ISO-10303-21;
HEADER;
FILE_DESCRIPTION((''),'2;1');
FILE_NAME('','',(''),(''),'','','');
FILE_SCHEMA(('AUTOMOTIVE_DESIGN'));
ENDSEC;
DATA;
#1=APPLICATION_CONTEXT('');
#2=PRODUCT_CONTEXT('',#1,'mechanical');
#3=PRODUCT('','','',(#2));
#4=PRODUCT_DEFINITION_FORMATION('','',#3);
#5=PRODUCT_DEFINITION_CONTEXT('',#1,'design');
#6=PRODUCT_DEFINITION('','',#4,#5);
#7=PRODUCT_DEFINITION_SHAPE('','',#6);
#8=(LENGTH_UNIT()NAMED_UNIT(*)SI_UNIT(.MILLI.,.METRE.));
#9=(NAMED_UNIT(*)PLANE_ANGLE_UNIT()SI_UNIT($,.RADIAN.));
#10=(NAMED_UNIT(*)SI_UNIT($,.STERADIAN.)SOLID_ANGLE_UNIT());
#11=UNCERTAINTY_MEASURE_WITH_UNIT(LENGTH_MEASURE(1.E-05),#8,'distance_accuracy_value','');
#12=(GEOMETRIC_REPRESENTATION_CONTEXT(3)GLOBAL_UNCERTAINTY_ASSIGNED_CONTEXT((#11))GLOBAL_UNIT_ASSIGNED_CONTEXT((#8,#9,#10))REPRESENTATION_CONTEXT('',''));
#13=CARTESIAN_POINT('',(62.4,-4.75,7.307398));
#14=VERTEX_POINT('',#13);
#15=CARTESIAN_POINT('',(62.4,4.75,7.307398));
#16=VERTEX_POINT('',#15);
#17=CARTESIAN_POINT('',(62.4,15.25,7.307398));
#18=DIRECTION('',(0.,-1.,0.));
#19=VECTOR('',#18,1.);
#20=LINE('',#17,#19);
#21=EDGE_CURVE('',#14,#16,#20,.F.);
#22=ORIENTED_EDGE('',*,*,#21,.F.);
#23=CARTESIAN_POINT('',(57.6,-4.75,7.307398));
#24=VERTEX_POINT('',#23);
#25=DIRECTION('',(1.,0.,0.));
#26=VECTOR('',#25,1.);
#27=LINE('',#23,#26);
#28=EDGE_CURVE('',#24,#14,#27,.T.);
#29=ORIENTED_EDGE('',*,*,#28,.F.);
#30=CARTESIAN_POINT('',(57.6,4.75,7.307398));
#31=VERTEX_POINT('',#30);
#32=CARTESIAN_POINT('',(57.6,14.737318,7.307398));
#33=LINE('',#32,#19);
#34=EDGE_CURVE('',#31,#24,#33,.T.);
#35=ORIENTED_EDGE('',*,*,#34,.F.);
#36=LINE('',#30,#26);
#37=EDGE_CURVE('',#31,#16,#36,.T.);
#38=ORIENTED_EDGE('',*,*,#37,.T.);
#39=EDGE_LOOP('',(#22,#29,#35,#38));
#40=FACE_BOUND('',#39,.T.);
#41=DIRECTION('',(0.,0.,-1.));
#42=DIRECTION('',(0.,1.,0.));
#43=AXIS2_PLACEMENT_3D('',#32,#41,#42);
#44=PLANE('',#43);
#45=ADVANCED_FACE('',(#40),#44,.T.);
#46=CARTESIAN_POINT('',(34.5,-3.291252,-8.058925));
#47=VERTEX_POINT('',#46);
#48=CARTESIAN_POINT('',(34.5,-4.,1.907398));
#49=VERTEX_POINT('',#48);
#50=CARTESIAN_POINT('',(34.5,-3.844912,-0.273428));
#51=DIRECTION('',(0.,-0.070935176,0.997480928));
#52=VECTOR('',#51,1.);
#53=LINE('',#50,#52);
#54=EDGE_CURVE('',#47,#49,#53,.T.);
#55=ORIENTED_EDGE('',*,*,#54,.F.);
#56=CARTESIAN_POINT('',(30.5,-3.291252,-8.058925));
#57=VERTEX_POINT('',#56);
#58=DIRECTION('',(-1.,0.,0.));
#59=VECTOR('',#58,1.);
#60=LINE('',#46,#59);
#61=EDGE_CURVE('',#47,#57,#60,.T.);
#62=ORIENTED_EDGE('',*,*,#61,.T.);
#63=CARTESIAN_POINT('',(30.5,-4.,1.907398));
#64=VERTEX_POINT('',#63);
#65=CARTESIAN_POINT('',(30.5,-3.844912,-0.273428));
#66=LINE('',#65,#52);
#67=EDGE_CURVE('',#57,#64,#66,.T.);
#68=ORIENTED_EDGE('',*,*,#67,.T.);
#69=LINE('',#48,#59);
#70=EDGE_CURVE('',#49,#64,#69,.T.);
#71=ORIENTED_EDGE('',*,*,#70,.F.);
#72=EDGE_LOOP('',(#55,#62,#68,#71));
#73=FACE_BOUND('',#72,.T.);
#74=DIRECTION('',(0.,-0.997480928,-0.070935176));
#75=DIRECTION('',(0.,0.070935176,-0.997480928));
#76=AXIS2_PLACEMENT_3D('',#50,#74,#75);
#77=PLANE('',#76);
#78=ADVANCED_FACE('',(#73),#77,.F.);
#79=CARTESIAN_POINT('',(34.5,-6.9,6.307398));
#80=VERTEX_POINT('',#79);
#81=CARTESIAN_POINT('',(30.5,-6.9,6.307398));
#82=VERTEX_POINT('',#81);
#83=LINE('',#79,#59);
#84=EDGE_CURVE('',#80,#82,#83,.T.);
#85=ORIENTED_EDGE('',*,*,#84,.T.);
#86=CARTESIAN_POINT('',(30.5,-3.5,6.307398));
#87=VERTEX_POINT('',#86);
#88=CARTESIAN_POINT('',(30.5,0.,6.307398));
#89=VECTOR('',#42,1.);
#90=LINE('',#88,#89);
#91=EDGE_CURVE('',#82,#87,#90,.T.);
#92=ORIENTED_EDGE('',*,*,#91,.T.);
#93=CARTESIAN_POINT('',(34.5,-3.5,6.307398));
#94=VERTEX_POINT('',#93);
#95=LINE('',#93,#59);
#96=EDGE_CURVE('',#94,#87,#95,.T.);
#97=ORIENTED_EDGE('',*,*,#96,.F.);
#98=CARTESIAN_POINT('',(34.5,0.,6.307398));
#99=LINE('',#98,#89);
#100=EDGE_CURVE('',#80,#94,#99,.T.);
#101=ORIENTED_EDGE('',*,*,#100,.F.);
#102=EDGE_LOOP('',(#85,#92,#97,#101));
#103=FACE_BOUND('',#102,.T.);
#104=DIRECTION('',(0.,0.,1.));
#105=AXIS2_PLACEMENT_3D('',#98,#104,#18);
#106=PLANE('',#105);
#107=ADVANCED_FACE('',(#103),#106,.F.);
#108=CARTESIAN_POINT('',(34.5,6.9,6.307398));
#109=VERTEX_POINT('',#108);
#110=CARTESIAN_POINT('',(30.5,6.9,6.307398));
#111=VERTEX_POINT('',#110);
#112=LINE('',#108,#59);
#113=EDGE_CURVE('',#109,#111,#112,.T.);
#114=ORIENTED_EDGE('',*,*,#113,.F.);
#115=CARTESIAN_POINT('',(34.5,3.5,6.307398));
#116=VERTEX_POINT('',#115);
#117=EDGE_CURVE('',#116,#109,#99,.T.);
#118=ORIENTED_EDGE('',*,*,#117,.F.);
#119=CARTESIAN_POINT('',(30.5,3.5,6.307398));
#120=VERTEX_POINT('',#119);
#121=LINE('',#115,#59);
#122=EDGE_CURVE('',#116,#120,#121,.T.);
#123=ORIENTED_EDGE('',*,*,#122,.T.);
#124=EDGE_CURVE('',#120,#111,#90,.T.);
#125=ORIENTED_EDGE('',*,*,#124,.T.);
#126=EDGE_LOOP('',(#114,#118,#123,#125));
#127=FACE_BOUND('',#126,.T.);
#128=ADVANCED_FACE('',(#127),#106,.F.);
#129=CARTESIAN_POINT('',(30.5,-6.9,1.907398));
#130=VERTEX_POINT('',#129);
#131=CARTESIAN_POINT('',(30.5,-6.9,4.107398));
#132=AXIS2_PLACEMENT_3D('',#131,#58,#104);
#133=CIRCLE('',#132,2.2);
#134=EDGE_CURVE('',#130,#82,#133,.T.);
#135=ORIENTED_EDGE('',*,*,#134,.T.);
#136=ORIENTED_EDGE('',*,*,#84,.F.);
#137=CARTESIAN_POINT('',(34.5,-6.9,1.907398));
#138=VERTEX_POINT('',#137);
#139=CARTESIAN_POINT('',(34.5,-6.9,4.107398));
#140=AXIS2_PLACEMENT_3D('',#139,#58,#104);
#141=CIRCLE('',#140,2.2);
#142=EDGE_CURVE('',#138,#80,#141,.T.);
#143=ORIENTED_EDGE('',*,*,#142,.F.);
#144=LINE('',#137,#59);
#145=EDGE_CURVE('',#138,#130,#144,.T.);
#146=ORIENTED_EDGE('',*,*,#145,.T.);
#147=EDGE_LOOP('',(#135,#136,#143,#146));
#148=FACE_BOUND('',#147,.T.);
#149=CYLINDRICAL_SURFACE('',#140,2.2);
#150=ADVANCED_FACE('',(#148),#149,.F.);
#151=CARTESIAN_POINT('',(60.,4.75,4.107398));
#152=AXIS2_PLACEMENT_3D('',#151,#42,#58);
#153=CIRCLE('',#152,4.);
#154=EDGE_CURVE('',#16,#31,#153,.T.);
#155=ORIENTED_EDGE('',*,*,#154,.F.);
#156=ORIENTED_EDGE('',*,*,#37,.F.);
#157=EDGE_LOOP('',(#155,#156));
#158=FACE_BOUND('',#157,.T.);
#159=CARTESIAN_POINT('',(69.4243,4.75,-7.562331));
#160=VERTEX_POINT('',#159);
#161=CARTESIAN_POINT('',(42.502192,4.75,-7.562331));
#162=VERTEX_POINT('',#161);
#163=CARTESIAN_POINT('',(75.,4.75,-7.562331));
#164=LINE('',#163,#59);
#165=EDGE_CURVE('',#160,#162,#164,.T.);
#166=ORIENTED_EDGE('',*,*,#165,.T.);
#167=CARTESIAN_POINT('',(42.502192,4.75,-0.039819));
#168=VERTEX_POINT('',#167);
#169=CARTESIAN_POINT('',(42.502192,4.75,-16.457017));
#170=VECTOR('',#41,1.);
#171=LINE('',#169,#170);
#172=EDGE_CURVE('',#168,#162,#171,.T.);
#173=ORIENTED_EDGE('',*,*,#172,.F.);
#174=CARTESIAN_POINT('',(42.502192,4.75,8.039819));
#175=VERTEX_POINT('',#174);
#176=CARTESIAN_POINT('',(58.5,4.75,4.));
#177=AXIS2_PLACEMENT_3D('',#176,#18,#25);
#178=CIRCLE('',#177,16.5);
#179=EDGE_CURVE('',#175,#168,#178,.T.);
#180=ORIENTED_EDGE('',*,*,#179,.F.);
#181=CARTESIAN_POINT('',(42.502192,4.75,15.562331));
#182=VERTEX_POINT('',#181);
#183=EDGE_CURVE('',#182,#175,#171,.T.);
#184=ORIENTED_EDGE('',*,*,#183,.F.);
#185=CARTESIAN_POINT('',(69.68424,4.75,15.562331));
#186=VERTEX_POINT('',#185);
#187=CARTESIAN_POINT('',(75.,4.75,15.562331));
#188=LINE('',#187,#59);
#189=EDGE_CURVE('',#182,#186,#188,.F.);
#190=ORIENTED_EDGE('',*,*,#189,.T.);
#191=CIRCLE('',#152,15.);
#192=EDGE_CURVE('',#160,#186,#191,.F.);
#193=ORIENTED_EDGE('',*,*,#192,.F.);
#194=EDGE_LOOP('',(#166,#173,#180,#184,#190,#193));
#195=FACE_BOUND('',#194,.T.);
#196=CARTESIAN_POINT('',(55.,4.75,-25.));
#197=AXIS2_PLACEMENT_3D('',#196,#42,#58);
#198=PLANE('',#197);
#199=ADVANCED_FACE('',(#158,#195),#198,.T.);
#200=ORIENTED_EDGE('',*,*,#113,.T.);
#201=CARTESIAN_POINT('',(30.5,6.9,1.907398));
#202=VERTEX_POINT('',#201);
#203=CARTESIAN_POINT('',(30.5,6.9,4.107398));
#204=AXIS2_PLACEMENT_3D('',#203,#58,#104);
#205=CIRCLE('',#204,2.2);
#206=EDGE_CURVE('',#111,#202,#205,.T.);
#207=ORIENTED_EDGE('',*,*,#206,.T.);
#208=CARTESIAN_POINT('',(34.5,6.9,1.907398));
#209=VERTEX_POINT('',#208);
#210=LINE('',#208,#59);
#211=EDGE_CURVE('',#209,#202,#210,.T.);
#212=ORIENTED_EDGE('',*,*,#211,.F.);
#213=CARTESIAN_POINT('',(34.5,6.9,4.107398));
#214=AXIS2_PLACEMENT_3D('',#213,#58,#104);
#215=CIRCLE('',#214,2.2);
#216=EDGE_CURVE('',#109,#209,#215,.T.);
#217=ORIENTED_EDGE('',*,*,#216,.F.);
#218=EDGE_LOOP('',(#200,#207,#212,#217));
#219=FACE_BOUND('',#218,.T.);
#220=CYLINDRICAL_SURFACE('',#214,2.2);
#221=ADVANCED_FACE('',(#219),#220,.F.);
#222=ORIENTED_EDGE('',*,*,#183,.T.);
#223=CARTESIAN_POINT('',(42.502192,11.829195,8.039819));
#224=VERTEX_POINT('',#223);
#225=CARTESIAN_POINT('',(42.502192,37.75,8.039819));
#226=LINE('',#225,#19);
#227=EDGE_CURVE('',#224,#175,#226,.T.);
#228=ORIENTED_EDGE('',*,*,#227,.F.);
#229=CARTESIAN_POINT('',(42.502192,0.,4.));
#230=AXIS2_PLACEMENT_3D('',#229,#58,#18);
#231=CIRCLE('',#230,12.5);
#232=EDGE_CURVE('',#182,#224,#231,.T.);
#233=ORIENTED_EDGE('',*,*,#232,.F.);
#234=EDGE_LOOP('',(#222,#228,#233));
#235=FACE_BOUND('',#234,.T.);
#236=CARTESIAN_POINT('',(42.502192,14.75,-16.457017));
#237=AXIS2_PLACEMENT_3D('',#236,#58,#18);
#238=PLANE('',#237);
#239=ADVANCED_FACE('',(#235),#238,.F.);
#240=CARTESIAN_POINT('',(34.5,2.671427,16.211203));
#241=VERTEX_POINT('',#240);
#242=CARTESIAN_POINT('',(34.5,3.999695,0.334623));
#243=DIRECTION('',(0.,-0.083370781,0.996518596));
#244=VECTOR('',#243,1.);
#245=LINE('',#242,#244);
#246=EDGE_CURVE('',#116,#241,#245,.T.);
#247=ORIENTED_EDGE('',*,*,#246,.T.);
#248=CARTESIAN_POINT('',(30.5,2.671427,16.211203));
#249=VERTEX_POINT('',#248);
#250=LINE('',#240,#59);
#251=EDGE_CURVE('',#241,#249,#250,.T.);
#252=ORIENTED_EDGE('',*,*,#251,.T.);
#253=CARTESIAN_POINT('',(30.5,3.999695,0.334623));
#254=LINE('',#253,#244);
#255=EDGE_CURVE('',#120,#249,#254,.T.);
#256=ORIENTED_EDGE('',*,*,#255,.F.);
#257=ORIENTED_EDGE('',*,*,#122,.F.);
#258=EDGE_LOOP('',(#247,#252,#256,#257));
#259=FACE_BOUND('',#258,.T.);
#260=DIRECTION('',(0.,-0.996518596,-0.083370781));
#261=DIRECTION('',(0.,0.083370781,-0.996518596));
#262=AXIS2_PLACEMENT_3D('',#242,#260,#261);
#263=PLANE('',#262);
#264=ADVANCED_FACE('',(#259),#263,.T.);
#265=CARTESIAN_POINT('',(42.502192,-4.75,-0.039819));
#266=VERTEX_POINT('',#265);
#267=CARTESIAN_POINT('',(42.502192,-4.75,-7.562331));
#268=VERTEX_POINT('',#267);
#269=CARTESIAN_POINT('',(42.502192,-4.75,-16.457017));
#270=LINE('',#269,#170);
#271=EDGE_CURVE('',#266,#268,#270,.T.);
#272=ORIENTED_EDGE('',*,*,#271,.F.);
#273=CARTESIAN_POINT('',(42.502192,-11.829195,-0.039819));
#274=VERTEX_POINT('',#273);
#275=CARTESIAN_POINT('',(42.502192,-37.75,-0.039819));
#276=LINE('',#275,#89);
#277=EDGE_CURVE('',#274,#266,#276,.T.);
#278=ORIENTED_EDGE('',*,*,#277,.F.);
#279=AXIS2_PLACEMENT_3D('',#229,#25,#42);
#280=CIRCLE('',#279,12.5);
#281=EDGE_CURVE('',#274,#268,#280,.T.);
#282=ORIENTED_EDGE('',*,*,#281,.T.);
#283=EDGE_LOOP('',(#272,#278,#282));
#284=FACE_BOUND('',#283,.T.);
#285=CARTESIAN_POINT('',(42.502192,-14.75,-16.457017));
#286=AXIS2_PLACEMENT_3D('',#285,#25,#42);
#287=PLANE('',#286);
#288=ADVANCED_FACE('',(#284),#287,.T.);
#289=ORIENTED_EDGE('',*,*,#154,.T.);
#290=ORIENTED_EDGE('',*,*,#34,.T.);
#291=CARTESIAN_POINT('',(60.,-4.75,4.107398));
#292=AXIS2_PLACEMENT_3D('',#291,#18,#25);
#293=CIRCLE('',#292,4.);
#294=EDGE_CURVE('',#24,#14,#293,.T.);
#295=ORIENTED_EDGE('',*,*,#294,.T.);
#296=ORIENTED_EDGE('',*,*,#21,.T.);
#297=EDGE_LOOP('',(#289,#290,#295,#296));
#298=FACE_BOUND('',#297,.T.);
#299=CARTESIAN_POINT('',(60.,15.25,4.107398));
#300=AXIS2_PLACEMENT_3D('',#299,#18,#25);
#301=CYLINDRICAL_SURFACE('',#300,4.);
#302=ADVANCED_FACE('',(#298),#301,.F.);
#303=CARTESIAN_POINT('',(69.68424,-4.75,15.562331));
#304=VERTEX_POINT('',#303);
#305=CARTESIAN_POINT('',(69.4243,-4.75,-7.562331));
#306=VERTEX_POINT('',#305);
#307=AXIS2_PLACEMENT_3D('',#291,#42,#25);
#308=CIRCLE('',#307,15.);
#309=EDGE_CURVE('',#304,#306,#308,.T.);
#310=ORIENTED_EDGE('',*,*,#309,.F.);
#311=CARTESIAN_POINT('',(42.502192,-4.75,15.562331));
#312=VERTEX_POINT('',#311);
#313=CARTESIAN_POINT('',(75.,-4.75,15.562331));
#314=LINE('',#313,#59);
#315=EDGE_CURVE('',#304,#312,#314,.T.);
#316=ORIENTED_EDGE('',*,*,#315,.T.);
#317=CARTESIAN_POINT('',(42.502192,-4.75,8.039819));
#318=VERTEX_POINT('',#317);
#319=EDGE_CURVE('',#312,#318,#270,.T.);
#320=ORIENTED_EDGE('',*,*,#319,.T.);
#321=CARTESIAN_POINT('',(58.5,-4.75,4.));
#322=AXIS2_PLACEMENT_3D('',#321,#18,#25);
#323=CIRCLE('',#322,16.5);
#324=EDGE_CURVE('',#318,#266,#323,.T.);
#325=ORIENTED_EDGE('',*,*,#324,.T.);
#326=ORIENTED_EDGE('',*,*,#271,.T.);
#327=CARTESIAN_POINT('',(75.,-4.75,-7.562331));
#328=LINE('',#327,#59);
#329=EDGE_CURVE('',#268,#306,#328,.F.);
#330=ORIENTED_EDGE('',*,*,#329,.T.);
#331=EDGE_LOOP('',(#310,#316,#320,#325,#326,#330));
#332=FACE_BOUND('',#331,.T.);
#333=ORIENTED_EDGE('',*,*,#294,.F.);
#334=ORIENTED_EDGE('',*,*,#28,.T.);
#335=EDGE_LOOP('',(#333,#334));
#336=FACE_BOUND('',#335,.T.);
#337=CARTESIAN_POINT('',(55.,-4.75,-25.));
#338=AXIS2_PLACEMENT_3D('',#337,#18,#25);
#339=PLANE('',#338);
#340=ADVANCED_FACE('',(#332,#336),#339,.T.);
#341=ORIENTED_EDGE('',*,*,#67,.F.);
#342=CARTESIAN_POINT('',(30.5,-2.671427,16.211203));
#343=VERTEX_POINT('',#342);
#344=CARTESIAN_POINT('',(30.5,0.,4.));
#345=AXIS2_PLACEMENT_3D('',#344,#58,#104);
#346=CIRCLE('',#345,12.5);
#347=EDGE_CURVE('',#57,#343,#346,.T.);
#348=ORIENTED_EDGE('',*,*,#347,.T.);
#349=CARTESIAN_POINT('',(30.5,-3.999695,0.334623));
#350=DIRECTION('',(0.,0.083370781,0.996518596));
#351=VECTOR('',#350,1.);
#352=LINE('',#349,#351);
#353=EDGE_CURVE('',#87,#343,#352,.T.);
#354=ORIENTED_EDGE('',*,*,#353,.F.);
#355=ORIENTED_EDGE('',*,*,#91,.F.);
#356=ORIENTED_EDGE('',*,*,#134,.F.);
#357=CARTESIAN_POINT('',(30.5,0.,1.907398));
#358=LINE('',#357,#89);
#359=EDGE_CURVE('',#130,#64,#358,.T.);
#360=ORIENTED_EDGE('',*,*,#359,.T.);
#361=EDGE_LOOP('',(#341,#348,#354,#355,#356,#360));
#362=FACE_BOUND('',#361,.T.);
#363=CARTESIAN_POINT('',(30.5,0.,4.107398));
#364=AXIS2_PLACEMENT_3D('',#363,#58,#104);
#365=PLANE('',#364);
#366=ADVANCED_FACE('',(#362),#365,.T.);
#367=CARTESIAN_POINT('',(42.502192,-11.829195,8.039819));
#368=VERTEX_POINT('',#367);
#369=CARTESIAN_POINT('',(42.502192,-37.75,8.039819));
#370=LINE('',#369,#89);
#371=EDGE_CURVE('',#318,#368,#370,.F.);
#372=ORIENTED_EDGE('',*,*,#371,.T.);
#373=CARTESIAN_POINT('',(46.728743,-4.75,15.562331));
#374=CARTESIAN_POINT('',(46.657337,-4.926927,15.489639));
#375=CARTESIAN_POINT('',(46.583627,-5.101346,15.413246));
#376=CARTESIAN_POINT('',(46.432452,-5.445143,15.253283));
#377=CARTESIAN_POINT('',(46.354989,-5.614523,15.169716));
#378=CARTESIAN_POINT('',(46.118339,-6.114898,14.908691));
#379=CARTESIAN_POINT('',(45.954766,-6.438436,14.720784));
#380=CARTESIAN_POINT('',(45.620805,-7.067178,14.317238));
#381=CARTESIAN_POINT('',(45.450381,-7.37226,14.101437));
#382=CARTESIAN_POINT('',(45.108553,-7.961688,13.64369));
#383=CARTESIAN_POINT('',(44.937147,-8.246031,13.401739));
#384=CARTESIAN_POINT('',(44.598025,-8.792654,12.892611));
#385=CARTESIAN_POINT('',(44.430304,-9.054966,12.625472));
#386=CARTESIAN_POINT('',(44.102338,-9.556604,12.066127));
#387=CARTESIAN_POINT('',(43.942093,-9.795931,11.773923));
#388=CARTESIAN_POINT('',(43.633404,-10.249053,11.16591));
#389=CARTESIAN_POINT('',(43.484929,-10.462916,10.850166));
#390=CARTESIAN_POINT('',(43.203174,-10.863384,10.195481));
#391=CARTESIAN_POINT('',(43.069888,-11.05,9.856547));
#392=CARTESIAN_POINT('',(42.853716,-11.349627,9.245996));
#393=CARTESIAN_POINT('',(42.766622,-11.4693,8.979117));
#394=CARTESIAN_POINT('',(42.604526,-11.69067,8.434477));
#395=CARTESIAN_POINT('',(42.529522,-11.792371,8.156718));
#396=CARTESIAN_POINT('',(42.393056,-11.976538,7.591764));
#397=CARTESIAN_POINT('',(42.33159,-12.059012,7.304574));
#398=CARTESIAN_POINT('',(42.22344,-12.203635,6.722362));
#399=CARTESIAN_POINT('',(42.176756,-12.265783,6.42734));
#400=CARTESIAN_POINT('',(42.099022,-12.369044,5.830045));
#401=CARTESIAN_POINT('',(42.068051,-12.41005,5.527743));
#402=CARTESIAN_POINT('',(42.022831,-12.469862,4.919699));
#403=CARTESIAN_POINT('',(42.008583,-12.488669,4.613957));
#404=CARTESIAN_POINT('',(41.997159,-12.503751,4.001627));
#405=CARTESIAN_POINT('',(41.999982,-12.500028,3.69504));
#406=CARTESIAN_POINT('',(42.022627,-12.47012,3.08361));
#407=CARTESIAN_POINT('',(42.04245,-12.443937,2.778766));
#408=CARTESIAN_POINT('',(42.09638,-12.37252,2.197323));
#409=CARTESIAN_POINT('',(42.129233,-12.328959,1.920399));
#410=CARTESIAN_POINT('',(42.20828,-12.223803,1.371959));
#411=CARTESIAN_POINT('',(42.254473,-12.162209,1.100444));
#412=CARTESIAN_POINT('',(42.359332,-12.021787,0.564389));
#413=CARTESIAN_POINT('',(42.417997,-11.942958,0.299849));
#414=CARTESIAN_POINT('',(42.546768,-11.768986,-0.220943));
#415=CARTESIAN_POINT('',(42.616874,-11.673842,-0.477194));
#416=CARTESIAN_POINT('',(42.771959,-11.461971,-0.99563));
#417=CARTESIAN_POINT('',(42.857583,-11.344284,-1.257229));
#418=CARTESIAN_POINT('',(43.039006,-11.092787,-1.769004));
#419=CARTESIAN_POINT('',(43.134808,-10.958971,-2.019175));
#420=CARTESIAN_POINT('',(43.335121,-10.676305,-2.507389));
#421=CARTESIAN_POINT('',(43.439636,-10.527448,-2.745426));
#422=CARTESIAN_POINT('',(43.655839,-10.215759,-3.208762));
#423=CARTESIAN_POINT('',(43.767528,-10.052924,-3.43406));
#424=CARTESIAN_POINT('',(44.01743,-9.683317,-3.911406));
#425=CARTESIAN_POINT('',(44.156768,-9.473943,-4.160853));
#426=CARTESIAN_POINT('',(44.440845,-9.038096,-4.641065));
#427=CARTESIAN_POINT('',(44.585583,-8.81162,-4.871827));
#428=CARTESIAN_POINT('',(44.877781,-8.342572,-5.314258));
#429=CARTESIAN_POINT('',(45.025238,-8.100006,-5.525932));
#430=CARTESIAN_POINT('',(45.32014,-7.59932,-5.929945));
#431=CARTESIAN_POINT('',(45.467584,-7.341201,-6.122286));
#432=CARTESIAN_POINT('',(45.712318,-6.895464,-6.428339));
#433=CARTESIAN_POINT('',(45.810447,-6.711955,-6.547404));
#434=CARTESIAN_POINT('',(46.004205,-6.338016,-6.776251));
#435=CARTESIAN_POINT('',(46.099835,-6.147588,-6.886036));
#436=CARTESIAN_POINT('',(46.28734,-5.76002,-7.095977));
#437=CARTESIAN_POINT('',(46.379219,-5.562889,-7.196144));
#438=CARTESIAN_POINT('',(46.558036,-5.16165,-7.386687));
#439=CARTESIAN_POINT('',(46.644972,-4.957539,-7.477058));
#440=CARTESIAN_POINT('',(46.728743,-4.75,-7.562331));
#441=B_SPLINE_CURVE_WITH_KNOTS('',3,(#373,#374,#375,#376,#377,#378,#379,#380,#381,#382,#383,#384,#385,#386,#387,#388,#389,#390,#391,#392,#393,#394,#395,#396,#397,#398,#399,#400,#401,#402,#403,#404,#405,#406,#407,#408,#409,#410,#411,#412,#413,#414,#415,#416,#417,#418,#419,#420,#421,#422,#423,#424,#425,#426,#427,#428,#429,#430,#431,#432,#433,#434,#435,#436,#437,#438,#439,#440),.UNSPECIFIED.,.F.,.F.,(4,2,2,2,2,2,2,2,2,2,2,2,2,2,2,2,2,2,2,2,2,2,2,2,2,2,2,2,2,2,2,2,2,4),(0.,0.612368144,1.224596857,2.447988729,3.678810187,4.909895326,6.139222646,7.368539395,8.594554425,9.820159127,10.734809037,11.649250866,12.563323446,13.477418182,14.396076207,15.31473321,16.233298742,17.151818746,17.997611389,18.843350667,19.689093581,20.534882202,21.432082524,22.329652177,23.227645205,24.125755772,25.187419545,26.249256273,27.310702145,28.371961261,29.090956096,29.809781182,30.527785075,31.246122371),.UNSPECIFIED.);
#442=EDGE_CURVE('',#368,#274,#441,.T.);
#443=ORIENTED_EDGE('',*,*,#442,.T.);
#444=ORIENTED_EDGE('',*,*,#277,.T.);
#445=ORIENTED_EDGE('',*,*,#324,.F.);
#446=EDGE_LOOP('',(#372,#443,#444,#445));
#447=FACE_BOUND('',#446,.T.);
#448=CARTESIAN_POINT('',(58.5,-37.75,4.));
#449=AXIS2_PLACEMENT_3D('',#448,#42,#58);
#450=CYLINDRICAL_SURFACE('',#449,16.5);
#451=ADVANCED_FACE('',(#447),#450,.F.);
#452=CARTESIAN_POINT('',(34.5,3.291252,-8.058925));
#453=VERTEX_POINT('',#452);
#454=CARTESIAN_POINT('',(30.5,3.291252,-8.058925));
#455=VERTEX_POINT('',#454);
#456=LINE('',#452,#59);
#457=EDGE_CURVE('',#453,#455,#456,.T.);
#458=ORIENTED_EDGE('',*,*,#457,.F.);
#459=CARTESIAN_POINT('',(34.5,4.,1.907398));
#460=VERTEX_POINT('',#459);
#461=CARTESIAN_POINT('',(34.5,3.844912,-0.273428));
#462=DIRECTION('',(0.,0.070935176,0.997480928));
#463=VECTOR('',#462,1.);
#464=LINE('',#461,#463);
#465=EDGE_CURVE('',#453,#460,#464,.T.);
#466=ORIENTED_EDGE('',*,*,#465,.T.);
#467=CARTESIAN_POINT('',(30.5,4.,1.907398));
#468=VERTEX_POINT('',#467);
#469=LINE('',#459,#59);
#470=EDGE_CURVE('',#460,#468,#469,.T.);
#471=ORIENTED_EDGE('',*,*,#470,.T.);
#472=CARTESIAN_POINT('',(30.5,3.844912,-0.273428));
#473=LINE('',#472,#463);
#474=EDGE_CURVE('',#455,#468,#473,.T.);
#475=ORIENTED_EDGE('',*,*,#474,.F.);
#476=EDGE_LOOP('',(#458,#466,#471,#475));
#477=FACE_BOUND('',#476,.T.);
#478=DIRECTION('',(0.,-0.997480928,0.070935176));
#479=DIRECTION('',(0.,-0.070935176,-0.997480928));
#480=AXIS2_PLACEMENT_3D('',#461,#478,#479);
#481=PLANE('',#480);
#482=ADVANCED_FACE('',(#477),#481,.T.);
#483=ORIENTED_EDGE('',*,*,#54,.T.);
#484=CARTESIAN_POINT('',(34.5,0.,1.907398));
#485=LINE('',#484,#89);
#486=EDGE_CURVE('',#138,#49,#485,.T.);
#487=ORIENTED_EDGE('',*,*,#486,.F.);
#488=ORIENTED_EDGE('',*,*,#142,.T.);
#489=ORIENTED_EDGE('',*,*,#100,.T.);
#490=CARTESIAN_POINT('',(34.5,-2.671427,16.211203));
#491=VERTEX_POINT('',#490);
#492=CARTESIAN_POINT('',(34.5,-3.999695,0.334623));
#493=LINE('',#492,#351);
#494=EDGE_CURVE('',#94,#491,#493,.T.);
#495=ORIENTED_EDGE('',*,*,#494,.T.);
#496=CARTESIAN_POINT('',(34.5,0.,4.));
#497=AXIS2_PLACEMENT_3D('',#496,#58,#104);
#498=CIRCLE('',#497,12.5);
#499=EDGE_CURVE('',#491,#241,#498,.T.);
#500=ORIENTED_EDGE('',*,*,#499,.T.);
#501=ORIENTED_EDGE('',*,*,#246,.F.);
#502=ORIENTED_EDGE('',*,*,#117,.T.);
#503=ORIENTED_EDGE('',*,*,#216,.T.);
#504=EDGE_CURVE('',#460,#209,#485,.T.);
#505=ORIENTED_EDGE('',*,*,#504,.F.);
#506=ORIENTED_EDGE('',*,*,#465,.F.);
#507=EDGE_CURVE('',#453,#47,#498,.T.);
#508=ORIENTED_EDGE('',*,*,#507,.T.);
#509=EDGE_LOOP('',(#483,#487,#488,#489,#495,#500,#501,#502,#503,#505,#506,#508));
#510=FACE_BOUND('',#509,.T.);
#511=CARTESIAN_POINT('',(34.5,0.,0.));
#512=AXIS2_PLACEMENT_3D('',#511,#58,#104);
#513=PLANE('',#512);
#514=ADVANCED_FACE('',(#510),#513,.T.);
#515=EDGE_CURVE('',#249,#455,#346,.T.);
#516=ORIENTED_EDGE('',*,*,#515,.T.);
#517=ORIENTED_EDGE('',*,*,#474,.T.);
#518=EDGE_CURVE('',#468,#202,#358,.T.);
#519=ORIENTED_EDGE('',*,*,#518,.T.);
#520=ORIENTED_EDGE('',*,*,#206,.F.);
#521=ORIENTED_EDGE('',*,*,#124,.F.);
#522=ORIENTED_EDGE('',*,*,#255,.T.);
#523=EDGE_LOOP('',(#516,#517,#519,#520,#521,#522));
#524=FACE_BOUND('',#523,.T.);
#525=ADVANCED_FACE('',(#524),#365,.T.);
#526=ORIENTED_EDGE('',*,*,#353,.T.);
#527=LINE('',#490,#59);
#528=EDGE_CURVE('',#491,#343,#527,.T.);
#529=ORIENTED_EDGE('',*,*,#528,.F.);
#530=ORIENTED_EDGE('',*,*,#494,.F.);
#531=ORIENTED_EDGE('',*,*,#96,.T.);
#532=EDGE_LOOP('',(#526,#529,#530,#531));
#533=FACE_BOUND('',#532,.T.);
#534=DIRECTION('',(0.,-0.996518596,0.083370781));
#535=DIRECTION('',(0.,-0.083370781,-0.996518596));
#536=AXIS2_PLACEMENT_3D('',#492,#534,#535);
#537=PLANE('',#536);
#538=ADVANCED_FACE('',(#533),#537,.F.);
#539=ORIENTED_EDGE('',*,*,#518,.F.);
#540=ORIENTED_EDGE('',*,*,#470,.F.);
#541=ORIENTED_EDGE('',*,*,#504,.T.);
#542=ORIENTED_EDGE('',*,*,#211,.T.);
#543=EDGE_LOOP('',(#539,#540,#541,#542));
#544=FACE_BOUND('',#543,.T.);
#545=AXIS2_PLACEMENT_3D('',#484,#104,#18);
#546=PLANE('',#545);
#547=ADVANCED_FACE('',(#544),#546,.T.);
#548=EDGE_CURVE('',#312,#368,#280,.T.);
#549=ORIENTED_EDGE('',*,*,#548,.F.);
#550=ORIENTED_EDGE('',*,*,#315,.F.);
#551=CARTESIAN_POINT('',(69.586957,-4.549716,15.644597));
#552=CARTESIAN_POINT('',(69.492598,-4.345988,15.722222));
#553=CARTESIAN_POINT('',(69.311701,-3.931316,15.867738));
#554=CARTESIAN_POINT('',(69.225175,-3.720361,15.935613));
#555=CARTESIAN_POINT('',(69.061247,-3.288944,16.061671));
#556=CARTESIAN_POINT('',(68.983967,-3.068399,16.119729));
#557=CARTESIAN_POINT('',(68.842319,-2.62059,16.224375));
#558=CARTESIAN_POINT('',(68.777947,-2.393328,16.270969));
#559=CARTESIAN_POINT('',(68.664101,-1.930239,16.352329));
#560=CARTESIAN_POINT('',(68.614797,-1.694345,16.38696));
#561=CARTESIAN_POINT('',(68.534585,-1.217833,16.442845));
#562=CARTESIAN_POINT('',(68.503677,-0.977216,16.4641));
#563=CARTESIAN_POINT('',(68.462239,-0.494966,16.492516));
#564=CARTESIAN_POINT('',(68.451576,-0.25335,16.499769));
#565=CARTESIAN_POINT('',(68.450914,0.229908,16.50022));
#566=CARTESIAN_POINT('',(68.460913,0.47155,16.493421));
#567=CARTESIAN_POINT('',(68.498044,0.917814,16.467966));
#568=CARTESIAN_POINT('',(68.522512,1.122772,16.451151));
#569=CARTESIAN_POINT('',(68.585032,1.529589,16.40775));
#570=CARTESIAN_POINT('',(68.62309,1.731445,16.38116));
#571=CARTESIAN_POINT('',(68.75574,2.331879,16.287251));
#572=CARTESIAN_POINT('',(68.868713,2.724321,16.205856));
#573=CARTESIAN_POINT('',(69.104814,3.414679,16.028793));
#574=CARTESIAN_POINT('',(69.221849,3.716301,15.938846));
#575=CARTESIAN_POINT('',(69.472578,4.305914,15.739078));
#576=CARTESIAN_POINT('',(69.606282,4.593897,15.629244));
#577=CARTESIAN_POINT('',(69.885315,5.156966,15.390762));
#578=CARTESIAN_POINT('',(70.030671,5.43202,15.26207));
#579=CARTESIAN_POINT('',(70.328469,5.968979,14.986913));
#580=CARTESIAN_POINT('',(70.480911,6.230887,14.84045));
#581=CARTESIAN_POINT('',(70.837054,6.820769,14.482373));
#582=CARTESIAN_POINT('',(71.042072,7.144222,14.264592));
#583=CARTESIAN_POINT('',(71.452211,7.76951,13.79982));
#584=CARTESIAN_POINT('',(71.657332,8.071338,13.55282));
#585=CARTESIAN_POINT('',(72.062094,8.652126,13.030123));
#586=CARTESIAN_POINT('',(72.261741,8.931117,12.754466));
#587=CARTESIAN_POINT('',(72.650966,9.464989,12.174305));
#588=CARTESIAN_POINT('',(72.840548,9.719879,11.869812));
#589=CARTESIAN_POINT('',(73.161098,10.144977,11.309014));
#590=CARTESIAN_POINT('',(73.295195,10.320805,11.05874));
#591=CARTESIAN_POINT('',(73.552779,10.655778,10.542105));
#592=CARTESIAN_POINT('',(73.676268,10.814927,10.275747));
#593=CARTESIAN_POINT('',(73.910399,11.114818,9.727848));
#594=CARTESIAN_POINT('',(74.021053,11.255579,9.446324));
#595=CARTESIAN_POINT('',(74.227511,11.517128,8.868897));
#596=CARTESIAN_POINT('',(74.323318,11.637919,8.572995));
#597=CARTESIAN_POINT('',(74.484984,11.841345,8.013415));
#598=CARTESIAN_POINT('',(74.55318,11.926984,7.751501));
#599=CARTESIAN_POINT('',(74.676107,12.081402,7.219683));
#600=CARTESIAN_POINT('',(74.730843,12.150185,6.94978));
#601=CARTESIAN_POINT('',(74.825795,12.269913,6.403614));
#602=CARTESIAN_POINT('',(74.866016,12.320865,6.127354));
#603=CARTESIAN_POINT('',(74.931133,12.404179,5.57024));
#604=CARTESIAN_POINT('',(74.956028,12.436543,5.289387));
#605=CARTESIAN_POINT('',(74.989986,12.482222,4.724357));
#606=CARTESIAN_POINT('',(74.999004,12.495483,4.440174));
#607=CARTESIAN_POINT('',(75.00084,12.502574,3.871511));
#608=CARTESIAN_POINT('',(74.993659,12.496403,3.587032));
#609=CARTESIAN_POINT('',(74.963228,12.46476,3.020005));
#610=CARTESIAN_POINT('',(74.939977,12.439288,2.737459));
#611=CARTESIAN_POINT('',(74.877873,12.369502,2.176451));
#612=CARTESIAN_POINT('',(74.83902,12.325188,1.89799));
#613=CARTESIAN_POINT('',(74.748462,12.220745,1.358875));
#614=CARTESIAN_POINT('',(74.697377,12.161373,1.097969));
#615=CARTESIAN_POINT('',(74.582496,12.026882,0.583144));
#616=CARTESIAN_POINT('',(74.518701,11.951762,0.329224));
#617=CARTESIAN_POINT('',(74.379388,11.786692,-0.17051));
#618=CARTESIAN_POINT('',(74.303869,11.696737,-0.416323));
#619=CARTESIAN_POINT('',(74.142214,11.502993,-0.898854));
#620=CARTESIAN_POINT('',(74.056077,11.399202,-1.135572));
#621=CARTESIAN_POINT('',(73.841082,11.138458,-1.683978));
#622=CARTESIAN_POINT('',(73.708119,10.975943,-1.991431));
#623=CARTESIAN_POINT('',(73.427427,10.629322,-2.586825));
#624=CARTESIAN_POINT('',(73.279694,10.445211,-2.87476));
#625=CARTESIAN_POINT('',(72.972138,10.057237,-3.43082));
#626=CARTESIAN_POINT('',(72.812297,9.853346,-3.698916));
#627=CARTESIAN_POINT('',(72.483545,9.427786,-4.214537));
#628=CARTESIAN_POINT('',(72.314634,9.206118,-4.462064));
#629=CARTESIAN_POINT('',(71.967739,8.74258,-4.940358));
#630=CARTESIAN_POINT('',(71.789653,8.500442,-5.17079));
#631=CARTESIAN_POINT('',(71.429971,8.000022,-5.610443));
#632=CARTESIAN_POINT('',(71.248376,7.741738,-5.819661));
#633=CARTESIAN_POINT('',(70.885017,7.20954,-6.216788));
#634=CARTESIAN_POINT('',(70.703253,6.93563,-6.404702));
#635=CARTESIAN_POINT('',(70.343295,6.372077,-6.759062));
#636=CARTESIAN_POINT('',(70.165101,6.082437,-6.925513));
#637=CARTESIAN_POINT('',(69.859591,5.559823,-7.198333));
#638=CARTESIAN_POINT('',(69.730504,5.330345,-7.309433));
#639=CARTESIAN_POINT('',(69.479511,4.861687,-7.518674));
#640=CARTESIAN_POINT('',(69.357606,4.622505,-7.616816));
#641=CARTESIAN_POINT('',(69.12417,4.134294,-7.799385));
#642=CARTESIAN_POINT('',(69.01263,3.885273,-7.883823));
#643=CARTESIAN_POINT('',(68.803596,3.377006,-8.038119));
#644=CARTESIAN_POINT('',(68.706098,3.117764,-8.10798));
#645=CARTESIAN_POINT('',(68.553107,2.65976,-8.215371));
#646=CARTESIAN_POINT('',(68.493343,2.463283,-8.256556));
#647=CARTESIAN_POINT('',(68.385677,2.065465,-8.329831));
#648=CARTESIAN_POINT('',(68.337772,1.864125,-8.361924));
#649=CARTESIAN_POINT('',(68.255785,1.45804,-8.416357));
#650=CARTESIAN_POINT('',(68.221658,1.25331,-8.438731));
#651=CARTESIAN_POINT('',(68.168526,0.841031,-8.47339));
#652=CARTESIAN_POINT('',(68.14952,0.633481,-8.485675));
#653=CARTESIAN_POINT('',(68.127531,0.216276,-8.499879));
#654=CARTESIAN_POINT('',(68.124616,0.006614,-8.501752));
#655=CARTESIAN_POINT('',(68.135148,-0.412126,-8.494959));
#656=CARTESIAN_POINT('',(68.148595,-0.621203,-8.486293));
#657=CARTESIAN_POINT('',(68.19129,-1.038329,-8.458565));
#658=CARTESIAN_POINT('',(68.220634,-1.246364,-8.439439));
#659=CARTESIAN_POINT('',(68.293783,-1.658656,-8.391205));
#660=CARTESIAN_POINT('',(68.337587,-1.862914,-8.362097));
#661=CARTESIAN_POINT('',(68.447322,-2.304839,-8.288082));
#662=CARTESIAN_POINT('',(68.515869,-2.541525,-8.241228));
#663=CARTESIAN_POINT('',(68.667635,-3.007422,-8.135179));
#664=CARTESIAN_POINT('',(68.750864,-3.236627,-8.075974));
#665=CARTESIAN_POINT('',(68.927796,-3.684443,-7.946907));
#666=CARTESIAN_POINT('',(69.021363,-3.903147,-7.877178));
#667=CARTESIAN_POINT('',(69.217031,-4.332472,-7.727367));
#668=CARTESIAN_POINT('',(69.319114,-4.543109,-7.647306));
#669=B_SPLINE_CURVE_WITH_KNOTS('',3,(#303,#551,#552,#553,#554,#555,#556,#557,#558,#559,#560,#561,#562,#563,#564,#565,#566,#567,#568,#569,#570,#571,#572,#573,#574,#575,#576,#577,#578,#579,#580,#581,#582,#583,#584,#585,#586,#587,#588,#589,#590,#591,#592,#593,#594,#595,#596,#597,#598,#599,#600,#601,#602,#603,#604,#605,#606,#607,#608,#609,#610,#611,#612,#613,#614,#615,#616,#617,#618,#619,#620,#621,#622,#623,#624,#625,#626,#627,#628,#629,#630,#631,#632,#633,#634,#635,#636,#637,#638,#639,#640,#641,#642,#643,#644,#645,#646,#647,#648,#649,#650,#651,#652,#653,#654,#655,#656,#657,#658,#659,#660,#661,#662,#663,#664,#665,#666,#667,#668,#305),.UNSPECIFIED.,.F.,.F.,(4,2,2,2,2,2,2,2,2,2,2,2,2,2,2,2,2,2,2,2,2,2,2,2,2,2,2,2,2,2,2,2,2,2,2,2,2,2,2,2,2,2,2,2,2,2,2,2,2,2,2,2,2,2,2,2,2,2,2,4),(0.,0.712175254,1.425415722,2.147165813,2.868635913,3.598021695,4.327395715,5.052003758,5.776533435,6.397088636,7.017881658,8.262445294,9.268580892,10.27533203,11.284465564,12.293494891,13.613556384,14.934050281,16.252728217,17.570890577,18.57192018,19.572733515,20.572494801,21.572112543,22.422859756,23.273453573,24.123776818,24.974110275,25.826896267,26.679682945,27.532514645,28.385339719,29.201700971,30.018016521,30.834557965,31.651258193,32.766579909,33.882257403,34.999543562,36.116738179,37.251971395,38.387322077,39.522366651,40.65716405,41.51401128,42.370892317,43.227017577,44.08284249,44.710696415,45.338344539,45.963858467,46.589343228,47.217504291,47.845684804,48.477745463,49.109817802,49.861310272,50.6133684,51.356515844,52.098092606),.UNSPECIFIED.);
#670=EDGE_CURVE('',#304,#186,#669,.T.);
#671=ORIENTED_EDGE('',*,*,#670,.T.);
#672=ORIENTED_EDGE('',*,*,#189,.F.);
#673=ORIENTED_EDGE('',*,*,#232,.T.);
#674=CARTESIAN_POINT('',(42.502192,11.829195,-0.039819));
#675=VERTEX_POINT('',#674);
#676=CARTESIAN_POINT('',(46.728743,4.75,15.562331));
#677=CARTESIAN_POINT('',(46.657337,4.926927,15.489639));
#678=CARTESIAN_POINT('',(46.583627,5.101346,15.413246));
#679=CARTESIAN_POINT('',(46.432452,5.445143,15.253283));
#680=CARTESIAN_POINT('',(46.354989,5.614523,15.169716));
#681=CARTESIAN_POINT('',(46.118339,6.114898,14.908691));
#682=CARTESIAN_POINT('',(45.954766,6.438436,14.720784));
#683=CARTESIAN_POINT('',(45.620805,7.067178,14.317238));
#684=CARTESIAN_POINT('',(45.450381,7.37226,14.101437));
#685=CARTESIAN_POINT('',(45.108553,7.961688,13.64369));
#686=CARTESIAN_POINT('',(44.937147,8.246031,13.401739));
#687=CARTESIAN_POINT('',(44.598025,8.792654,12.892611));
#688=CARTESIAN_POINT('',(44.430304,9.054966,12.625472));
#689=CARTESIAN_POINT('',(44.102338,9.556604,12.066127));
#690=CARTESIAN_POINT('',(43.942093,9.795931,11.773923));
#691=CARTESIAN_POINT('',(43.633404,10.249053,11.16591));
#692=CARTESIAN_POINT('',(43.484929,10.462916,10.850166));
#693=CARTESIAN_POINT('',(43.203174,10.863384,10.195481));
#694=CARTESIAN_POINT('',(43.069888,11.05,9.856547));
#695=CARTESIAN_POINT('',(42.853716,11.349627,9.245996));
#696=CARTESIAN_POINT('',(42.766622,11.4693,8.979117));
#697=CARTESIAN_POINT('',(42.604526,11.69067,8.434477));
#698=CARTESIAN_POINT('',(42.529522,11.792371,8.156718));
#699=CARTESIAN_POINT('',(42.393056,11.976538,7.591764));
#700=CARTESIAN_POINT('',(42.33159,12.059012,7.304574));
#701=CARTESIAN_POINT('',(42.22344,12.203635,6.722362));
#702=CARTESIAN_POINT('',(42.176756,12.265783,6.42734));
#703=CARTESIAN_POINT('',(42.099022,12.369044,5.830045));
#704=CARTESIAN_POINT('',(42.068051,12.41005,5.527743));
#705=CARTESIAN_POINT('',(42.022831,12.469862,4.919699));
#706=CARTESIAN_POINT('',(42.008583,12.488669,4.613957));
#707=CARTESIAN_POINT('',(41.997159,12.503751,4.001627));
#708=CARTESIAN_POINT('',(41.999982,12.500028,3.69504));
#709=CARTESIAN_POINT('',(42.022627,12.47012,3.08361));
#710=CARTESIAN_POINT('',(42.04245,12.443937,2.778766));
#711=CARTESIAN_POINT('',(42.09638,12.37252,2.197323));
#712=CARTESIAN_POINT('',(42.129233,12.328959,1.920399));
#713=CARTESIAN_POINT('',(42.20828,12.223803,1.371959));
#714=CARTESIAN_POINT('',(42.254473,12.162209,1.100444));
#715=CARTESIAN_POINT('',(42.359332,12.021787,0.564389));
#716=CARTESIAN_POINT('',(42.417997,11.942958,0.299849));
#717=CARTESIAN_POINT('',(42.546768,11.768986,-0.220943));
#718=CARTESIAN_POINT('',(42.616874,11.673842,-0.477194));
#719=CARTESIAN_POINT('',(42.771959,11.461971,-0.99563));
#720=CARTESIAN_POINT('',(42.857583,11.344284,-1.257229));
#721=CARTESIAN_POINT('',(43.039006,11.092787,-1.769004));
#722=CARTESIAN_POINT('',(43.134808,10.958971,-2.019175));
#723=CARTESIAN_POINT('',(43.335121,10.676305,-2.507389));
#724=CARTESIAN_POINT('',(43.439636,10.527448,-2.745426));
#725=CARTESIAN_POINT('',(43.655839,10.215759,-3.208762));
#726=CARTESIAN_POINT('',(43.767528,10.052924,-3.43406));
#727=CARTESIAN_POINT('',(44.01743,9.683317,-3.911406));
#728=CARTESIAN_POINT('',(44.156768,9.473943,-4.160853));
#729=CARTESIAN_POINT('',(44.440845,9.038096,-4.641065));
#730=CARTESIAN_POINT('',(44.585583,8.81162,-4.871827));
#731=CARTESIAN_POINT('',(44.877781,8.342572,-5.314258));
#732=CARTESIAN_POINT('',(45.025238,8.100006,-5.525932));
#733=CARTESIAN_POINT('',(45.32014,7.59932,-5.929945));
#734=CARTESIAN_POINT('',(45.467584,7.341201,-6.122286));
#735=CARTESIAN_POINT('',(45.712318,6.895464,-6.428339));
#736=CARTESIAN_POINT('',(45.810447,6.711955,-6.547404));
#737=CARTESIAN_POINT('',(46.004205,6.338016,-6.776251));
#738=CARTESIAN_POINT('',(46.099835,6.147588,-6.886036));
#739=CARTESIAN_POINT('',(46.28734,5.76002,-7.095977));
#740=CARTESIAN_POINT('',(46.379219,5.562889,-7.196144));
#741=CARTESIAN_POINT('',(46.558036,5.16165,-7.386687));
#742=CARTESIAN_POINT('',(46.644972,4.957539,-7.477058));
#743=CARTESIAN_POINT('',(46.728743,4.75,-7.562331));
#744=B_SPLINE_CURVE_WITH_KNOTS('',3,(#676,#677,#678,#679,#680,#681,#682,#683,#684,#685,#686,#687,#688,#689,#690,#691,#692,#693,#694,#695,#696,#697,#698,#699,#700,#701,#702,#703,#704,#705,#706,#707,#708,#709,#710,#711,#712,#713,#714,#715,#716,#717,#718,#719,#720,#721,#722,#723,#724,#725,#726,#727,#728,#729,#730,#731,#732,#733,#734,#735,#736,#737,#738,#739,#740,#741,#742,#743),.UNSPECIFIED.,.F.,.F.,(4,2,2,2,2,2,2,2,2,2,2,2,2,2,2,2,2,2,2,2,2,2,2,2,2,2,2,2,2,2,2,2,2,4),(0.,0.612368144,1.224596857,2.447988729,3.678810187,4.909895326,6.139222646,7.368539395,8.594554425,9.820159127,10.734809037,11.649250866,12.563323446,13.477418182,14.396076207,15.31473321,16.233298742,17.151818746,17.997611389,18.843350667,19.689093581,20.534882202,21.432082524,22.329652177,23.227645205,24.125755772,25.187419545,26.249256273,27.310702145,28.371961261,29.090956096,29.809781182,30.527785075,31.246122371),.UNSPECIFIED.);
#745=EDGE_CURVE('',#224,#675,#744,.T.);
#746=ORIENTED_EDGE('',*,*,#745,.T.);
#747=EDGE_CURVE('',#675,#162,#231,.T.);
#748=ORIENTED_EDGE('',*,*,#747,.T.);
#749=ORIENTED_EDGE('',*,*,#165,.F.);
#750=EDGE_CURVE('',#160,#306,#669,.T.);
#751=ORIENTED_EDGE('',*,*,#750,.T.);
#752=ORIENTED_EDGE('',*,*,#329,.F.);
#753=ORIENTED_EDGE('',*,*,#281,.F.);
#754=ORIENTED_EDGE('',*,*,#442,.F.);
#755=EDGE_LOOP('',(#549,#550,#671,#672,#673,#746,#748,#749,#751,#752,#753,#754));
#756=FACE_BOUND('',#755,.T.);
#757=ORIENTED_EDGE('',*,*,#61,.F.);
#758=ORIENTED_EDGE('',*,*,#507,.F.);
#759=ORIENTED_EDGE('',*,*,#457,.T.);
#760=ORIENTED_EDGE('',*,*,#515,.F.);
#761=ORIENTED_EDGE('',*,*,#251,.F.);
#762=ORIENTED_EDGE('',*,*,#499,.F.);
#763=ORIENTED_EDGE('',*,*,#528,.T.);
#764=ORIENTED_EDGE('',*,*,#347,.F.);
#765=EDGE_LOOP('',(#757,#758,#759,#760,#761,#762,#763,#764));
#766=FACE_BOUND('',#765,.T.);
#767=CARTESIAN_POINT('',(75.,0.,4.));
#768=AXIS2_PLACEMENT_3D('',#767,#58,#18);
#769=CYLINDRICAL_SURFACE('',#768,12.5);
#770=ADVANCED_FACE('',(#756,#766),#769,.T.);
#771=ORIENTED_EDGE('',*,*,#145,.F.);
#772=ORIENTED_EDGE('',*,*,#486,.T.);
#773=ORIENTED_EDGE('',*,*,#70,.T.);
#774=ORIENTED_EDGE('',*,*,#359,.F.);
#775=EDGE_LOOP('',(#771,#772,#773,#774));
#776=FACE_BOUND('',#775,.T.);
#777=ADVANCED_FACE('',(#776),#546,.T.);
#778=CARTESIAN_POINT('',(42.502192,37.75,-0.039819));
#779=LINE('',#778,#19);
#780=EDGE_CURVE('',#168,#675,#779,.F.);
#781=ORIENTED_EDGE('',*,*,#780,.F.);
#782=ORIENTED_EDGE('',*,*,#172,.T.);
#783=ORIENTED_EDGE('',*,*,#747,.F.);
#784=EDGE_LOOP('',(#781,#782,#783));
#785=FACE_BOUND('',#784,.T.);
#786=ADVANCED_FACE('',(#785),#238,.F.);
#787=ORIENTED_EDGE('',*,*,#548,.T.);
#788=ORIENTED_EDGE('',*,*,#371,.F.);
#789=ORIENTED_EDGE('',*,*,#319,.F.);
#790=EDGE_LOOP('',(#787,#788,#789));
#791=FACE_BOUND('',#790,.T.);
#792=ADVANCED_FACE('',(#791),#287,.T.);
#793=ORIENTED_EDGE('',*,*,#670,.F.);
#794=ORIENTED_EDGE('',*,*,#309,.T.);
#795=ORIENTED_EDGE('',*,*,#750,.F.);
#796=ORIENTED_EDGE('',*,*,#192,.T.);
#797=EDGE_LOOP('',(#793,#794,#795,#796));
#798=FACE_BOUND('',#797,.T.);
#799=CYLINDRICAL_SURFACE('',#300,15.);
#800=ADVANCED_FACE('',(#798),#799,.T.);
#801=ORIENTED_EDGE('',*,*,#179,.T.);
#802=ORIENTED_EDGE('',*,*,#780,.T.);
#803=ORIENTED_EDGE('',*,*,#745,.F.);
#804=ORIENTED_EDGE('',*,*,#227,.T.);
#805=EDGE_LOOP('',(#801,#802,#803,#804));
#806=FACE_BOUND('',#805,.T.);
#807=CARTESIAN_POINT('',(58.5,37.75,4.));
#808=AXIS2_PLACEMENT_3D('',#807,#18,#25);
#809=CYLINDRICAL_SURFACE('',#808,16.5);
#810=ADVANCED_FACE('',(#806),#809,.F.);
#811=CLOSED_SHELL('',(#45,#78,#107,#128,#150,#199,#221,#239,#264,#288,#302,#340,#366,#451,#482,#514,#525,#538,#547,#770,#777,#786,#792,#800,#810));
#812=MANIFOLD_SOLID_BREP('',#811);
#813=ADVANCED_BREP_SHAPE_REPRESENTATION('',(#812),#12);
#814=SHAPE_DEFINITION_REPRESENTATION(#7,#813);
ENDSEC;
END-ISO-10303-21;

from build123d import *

# Parameters (mm, degrees)
SKETCH_1_W                = 50
SKETCH_1_H                = 40
EXTRUDE_1_DEPTH           = 8
CHAMFER_1_SIZE            = 10
SKETCH_2_R                = 1.55
CUT_EXTRUDE_1_DEPTH       = 10
EXTRUDE_2_DEPTH           = 50
EXTRUDE_2_DEPTH_BACK      = 15
SKETCH_3_R                = 12.5
SKETCH_4_R                = 1.7
CUT_EXTRUDE_2_DEPTH       = 15
CUT_EXTRUDE_START         = -20
CUT_EXTRUDE_3_DEPTH       = 20
SKETCH_7_R                = 16.5
CUT_EXTRUDE_8_DEPTH       = 33
CUT_EXTRUDE_9_DEPTH       = 20
CHAMFER_3_SIZE            = 2
SKETCH_10_OUTSIDE_W       = 49.114
SKETCH_10_OUTSIDE_H       = 64.114
SKETCH_10_OUTSIDE_R       = 12.5
CUT_EXTRUDE_10_DEPTH      = 10
CHAMFER_4_SIZE            = 10
SKETCH_12_W               = 1.5
SKETCH_12_H               = 20
SKETCH_14_W               = 12
SKETCH_14_H               = 23
CUT_EXTRUDE_11_DEPTH      = 3
CUT_EXTRUDE_12_DEPTH      = 4.2
SKETCH_16_R               = 1.1
CUT_EXTRUDE_13_DEPTH      = 5
SKETCH_17_R               = 3.372674955
EXTRUDE_3_DEPTH           = 4
SKETCH_18_R               = 1.1
CUT_EXTRUDE_14_DEPTH      = 4
SKETCH_20_R               = 4
CUT_EXTRUDE_15_DEPTH      = 4
CUT_EXTRUDE_16_DEPTH      = 80.355214185
CUT_EXTRUDE_16_DEPTH_BACK = 80.355214185
SKETCH_21_W               = 47.755098741
SKETCH_21_H               = 76.122443719
SKETCH_26_R               = 4
CUT_EXTRUDE_19_DEPTH      = 20
SKETCH_28_W               = 34.99561618
SKETCH_28_H               = 41.128829021
CUT_EXTRUDE_20_DEPTH      = 10
SKETCH_29_W               = 7.599941767
SKETCH_29_H               = 6.479768366
EXTRUDE_6_DEPTH           = 9.5
SKETCH_24_R               = 12.607397707
CUT_EXTRUDE_21_DEPTH      = 15
CUT_EXTRUDE_22_DEPTH      = 4


# Read off the part's stored shape, not the designer's step: 切除-拉伸3
with BuildPart() as part:
    # 草图1 → 凸台-拉伸1 (new body)
    with BuildSketch(Plane.XY):
        Rectangle(SKETCH_1_W, SKETCH_1_H)
    extrude(amount=EXTRUDE_1_DEPTH)

    # 倒角1
    chamfer_1_edges = [part.edges().sort_by_distance(p)[0] for p in [
        (-25, -20, 4),
        (-25, 20, 4),
    ]]
    chamfer(chamfer_1_edges, length=CHAMFER_1_SIZE)

    # 草图2 → 切除-拉伸1 (cut)
    with BuildSketch(Plane.XY.offset(8)):
        with Locations((-2, -10)):
            Circle(SKETCH_2_R)
        with Locations((-2, 10)):
            Circle(SKETCH_2_R)
    extrude(amount=-CUT_EXTRUDE_1_DEPTH, mode=Mode.SUBTRACT)

    # 草图3 → 凸台-拉伸2 (add, two sides: drawn at the far end of the back side and taken through both)
    with BuildSketch(Plane(origin=(25, 0, 0), x_dir=(0, 0, -1), z_dir=(1, 0, 0)).offset(-EXTRUDE_2_DEPTH_BACK)):
        with Locations(Location((-4, 0, 0), (0, 0, 251.337075115))):
            Circle(SKETCH_3_R)
    extrude(amount=EXTRUDE_2_DEPTH + EXTRUDE_2_DEPTH_BACK)

    # 草图4 → 切除-拉伸2 (cut)
    with BuildSketch(Plane.XY.offset(8)):
        with Locations((-19.690178066, -4)):
            Circle(SKETCH_4_R)
        with Locations((-19.690178066, 4)):
            Circle(SKETCH_4_R)
    extrude(amount=-CUT_EXTRUDE_2_DEPTH, mode=Mode.SUBTRACT)

    # 切除-拉伸3 outline → 切除-拉伸3 (cut)
    with BuildSketch(Plane(origin=(75, 0, 0), x_dir=(0, 0, -1), z_dir=(1, 0, 0)).offset(CUT_EXTRUDE_START)):
        with BuildLine():
            Line((7.56233108, -4.75), (-15.56233108, -4.75))
            ThreePointArc((-15.56233108, -4.75), (-4, -12.5), (7.56233108, -4.75))
        make_face()
        with BuildLine():
            ThreePointArc((7.56233108, 4.75), (-4, 12.5), (-15.56233108, 4.75))
            Line((-15.56233108, 4.75), (7.56233108, 4.75))
        make_face()
    extrude(amount=CUT_EXTRUDE_3_DEPTH, mode=Mode.SUBTRACT)

    # 草图7 → 切除-拉伸8 (cut)
    with BuildSketch(Plane.XZ.offset(4.75)):
        with Locations((58.5, 4)):
            Circle(SKETCH_7_R)
    cut_extrude_8 = extrude(amount=CUT_EXTRUDE_8_DEPTH, mode=Mode.SUBTRACT)

    # 镜向1: 切除-拉伸8 across plane
    add(cut_extrude_8.mirror(Plane.ZX), mode=Mode.SUBTRACT)

    # 草图8 → 切除-拉伸9 (cut)
    with BuildSketch(Plane.XZ.offset(4.75)):
        with BuildLine():
            Line((60, 19.107397707), (75.764252489, 33.62580965))
            Line((75.764252489, 33.62580965), (78.826270749, -18.347337912))
            Line((78.826270749, -18.347337912), (60, -10.892602293))
            ThreePointArc((60, -10.892602293), (75, 4.107397707), (60, 19.107397707))
        make_face()
    extrude(amount=-CUT_EXTRUDE_9_DEPTH, mode=Mode.SUBTRACT)

    # 倒角3
    chamfer_3_edges = [part.edges().sort_by_distance(p)[0] for p in [
        (10, 0, 16.5),
        (10, 0, -8.5),
    ]]
    chamfer(chamfer_3_edges, length=CHAMFER_3_SIZE)

    # 草图10 outside → 切除-拉伸10 (cut)
    with BuildSketch(Plane(origin=(25, 0, 0), x_dir=(0, 0, -1), z_dir=(1, 0, 0))):
        with Locations((-4, 0)):
            Rectangle(SKETCH_10_OUTSIDE_W, SKETCH_10_OUTSIDE_H)
        with Locations((-4.107397707, 0)):
            Circle(SKETCH_10_OUTSIDE_R, mode=Mode.SUBTRACT)
    extrude(amount=-CUT_EXTRUDE_10_DEPTH, mode=Mode.SUBTRACT)

    # 倒角4
    # the kernel refuses this chamfer: 10 mm, written as the material it takes off along each edge
    with BuildSketch(Plane(origin=(15, -20, -25.71682988), x_dir=(-0.9996219169112968, -0.027495876610586317, 0), z_dir=(0, 0, 1))) as chamfer_4_piece_1_section:
        Polygon((CHAMFER_4_SIZE * 0.999621916911, -CHAMFER_4_SIZE * 0.0274958766106), (-CHAMFER_4_SIZE * 0.0274958766106, -CHAMFER_4_SIZE * 0.999621916911), (0, 0), align=None)
    chamfer_4_piece_1 = extrude(amount=59.433659759, mode=Mode.PRIVATE)
    chamfer_4_piece_1 = chamfer_4_piece_1 - Plane(origin=(11.669205873, 0, 4.107397707), x_dir=(0, 0, -1), z_dir=(1, 0, 0)) * Cylinder(12.5, 159, mode=Mode.PRIVATE)
    add(chamfer_4_piece_1, mode=Mode.SUBTRACT)
    with BuildSketch(Plane(origin=(15, 20, 33.71682988), x_dir=(-0.9996219169112968, 0.027495876610586317, 0), z_dir=(0, 0, -1))) as chamfer_4_piece_2_section:
        Polygon((CHAMFER_4_SIZE * 0.999621916911, -CHAMFER_4_SIZE * 0.0274958766106), (-CHAMFER_4_SIZE * 0.0274958766106, -CHAMFER_4_SIZE * 0.999621916911), (0, 0), align=None)
    chamfer_4_piece_2 = extrude(amount=59.433659759, mode=Mode.PRIVATE)
    chamfer_4_piece_2 = chamfer_4_piece_2 - Plane(origin=(11.669205873, 0, 4.107397707), x_dir=(0, 0, -1), z_dir=(1, 0, 0)) * Cylinder(12.5, 159, mode=Mode.PRIVATE)
    add(chamfer_4_piece_2, mode=Mode.SUBTRACT)

    # 草图12 → 切除-旋转2 (revolve, cut)
    with BuildSketch(Plane(origin=(0, 0, 0), x_dir=(1, 0, 0), z_dir=(0, 1, 0))):
        with Locations((14.75, 8.392602293)):
            Rectangle(SKETCH_12_W, SKETCH_12_H)
    revolve(axis=Axis((50, 0, 4.107397707), (-1, 0, 0)), mode=Mode.SUBTRACT)

    # 草图14 → 切除-拉伸11 (cut)
    with BuildSketch(Plane(origin=(0, 0, 0), x_dir=(-1, 0, 0), z_dir=(0, 0, -1))):
        with Locations((2, 4.65)):
            Rectangle(SKETCH_14_W, SKETCH_14_H)
    extrude(amount=-CUT_EXTRUDE_11_DEPTH, mode=Mode.SUBTRACT)

    # 草图15 → 切除-拉伸12 (cut)
    with BuildSketch(Plane(origin=(0, 0, 3), x_dir=(-1, 0, 0), z_dir=(0, 0, -1))):
        with BuildLine():
            ThreePointArc((4.631967524, 4.49702381), (2, 16.1), (-0.631967524, 4.49702381))
            ThreePointArc((-0.631967524, 4.49702381), (2, 0.95), (4.631967524, 4.49702381))
        make_face()
    extrude(amount=-CUT_EXTRUDE_12_DEPTH, mode=Mode.SUBTRACT)

    # 草图16 → 切除-拉伸13 (cut)
    with BuildSketch(Plane(origin=(0, 0, 0), x_dir=(-1, 0, 0), z_dir=(0, 0, -1))):
        with Locations((2, 18.3)):
            Circle(SKETCH_16_R)
    extrude(amount=-CUT_EXTRUDE_13_DEPTH, mode=Mode.SUBTRACT)

    # 草图17 → 凸台-拉伸3 (add)
    with BuildSketch(Plane(origin=(0, 0, 0), x_dir=(-1, 0, 0), z_dir=(0, 0, -1))):
        with Locations((2, -10)):
            Circle(SKETCH_17_R)
    extrude(amount=-EXTRUDE_3_DEPTH)

    # 草图18 → 切除-拉伸14 (cut)
    with BuildSketch(Plane(origin=(0, 0, 0), x_dir=(-1, 0, 0), z_dir=(0, 0, -1))):
        with Locations((2, -9)):
            Circle(SKETCH_18_R)
    extrude(amount=-CUT_EXTRUDE_14_DEPTH, mode=Mode.SUBTRACT)

    # 草图20 → 切除-拉伸15 (cut)
    with BuildSketch(Plane(origin=(0, 0, 7.2), x_dir=(-1, 0, 0), z_dir=(0, 0, -1))):
        with Locations((2, 10)):
            Circle(SKETCH_20_R)
    extrude(amount=-CUT_EXTRUDE_15_DEPTH, mode=Mode.SUBTRACT)

    # 草图21 → 切除-拉伸16 (cut, two sides: drawn at the far end of the back side and taken through both)
    with BuildSketch(Plane(origin=(0, 0, 0), x_dir=(-1, 0, 0), z_dir=(0, 0, -1)).offset(-CUT_EXTRUDE_16_DEPTH_BACK)):
        with Locations((8.377549371, -2.117346793)):
            Rectangle(SKETCH_21_W, SKETCH_21_H)
    extrude(amount=CUT_EXTRUDE_16_DEPTH + CUT_EXTRUDE_16_DEPTH_BACK, mode=Mode.SUBTRACT)

    # 草图26 → 切除-拉伸19 (cut)
    with BuildSketch(Plane.XZ.offset(4.75)):
        with Locations((60, 4.107397707)):
            Circle(SKETCH_26_R)
    extrude(amount=-CUT_EXTRUDE_19_DEPTH, mode=Mode.SUBTRACT)

    # 草图28 → 切除-拉伸20 (cut)
    with BuildSketch(Plane.XZ.offset(4.75)):
        with Locations((60, 4.107397707)):
            Rectangle(SKETCH_28_W, SKETCH_28_H)
    cut_extrude_20 = extrude(amount=CUT_EXTRUDE_20_DEPTH, mode=Mode.SUBTRACT)

    # 镜向2: 切除-拉伸20 across plane
    add(cut_extrude_20.mirror(Plane.ZX), mode=Mode.SUBTRACT)

    # 草图29 → 凸台-拉伸6 (add)
    with BuildSketch(Plane.XZ.offset(4.75)):
        with Locations((61.399970884, 10.54728189)):
            Rectangle(SKETCH_29_W, SKETCH_29_H)
    extrude(amount=-EXTRUDE_6_DEPTH)

    # 草图24 → 切除-拉伸21 (cut)
    with BuildSketch(Plane.ZY.offset(-15.5)):
        with Locations((4.107397707, 0)):
            Circle(SKETCH_24_R)
    extrude(amount=-CUT_EXTRUDE_21_DEPTH, mode=Mode.SUBTRACT)

    # 草图30 → 切除-拉伸22 (cut)
    with BuildSketch(Plane.ZY.offset(-30.5)):
        with BuildLine():
            Line((6.307397707, -6.9), (6.307397707, 6.9))
            ThreePointArc((6.307397707, 6.9), (4.107397707, 9.1), (1.907397707, 6.9))
            Line((1.907397707, 6.9), (1.907397707, -6.9))
            ThreePointArc((1.907397707, -6.9), (4.107397707, -9.1), (6.307397707, -6.9))
        make_face()
        with BuildLine():
            Line((-8.058924565, -3.29125179), (1.907397707, -4))
            Line((1.907397707, -4), (1.907397707, 4))
            Line((1.907397707, 4), (-8.058924565, 3.29125179))
            ThreePointArc((-8.058924565, 3.29125179), (-8.5, 0), (-8.058924565, -3.29125179))
        make_face()
        with BuildLine():
            Line((6.307397707, 3.5), (6.307397707, -3.5))
            Line((6.307397707, -3.5), (16.211202868, -2.671427431))
            ThreePointArc((16.211202868, -2.671427431), (16.427590994, -1.343496214), (16.5, 0))
            ThreePointArc((16.5, 0), (16.427590994, 1.343496214), (16.211202868, 2.671427431))
            Line((16.211202868, 2.671427431), (6.307397707, 3.5))
        make_face()
    extrude(amount=-CUT_EXTRUDE_22_DEPTH, mode=Mode.SUBTRACT)


solid = part.part
